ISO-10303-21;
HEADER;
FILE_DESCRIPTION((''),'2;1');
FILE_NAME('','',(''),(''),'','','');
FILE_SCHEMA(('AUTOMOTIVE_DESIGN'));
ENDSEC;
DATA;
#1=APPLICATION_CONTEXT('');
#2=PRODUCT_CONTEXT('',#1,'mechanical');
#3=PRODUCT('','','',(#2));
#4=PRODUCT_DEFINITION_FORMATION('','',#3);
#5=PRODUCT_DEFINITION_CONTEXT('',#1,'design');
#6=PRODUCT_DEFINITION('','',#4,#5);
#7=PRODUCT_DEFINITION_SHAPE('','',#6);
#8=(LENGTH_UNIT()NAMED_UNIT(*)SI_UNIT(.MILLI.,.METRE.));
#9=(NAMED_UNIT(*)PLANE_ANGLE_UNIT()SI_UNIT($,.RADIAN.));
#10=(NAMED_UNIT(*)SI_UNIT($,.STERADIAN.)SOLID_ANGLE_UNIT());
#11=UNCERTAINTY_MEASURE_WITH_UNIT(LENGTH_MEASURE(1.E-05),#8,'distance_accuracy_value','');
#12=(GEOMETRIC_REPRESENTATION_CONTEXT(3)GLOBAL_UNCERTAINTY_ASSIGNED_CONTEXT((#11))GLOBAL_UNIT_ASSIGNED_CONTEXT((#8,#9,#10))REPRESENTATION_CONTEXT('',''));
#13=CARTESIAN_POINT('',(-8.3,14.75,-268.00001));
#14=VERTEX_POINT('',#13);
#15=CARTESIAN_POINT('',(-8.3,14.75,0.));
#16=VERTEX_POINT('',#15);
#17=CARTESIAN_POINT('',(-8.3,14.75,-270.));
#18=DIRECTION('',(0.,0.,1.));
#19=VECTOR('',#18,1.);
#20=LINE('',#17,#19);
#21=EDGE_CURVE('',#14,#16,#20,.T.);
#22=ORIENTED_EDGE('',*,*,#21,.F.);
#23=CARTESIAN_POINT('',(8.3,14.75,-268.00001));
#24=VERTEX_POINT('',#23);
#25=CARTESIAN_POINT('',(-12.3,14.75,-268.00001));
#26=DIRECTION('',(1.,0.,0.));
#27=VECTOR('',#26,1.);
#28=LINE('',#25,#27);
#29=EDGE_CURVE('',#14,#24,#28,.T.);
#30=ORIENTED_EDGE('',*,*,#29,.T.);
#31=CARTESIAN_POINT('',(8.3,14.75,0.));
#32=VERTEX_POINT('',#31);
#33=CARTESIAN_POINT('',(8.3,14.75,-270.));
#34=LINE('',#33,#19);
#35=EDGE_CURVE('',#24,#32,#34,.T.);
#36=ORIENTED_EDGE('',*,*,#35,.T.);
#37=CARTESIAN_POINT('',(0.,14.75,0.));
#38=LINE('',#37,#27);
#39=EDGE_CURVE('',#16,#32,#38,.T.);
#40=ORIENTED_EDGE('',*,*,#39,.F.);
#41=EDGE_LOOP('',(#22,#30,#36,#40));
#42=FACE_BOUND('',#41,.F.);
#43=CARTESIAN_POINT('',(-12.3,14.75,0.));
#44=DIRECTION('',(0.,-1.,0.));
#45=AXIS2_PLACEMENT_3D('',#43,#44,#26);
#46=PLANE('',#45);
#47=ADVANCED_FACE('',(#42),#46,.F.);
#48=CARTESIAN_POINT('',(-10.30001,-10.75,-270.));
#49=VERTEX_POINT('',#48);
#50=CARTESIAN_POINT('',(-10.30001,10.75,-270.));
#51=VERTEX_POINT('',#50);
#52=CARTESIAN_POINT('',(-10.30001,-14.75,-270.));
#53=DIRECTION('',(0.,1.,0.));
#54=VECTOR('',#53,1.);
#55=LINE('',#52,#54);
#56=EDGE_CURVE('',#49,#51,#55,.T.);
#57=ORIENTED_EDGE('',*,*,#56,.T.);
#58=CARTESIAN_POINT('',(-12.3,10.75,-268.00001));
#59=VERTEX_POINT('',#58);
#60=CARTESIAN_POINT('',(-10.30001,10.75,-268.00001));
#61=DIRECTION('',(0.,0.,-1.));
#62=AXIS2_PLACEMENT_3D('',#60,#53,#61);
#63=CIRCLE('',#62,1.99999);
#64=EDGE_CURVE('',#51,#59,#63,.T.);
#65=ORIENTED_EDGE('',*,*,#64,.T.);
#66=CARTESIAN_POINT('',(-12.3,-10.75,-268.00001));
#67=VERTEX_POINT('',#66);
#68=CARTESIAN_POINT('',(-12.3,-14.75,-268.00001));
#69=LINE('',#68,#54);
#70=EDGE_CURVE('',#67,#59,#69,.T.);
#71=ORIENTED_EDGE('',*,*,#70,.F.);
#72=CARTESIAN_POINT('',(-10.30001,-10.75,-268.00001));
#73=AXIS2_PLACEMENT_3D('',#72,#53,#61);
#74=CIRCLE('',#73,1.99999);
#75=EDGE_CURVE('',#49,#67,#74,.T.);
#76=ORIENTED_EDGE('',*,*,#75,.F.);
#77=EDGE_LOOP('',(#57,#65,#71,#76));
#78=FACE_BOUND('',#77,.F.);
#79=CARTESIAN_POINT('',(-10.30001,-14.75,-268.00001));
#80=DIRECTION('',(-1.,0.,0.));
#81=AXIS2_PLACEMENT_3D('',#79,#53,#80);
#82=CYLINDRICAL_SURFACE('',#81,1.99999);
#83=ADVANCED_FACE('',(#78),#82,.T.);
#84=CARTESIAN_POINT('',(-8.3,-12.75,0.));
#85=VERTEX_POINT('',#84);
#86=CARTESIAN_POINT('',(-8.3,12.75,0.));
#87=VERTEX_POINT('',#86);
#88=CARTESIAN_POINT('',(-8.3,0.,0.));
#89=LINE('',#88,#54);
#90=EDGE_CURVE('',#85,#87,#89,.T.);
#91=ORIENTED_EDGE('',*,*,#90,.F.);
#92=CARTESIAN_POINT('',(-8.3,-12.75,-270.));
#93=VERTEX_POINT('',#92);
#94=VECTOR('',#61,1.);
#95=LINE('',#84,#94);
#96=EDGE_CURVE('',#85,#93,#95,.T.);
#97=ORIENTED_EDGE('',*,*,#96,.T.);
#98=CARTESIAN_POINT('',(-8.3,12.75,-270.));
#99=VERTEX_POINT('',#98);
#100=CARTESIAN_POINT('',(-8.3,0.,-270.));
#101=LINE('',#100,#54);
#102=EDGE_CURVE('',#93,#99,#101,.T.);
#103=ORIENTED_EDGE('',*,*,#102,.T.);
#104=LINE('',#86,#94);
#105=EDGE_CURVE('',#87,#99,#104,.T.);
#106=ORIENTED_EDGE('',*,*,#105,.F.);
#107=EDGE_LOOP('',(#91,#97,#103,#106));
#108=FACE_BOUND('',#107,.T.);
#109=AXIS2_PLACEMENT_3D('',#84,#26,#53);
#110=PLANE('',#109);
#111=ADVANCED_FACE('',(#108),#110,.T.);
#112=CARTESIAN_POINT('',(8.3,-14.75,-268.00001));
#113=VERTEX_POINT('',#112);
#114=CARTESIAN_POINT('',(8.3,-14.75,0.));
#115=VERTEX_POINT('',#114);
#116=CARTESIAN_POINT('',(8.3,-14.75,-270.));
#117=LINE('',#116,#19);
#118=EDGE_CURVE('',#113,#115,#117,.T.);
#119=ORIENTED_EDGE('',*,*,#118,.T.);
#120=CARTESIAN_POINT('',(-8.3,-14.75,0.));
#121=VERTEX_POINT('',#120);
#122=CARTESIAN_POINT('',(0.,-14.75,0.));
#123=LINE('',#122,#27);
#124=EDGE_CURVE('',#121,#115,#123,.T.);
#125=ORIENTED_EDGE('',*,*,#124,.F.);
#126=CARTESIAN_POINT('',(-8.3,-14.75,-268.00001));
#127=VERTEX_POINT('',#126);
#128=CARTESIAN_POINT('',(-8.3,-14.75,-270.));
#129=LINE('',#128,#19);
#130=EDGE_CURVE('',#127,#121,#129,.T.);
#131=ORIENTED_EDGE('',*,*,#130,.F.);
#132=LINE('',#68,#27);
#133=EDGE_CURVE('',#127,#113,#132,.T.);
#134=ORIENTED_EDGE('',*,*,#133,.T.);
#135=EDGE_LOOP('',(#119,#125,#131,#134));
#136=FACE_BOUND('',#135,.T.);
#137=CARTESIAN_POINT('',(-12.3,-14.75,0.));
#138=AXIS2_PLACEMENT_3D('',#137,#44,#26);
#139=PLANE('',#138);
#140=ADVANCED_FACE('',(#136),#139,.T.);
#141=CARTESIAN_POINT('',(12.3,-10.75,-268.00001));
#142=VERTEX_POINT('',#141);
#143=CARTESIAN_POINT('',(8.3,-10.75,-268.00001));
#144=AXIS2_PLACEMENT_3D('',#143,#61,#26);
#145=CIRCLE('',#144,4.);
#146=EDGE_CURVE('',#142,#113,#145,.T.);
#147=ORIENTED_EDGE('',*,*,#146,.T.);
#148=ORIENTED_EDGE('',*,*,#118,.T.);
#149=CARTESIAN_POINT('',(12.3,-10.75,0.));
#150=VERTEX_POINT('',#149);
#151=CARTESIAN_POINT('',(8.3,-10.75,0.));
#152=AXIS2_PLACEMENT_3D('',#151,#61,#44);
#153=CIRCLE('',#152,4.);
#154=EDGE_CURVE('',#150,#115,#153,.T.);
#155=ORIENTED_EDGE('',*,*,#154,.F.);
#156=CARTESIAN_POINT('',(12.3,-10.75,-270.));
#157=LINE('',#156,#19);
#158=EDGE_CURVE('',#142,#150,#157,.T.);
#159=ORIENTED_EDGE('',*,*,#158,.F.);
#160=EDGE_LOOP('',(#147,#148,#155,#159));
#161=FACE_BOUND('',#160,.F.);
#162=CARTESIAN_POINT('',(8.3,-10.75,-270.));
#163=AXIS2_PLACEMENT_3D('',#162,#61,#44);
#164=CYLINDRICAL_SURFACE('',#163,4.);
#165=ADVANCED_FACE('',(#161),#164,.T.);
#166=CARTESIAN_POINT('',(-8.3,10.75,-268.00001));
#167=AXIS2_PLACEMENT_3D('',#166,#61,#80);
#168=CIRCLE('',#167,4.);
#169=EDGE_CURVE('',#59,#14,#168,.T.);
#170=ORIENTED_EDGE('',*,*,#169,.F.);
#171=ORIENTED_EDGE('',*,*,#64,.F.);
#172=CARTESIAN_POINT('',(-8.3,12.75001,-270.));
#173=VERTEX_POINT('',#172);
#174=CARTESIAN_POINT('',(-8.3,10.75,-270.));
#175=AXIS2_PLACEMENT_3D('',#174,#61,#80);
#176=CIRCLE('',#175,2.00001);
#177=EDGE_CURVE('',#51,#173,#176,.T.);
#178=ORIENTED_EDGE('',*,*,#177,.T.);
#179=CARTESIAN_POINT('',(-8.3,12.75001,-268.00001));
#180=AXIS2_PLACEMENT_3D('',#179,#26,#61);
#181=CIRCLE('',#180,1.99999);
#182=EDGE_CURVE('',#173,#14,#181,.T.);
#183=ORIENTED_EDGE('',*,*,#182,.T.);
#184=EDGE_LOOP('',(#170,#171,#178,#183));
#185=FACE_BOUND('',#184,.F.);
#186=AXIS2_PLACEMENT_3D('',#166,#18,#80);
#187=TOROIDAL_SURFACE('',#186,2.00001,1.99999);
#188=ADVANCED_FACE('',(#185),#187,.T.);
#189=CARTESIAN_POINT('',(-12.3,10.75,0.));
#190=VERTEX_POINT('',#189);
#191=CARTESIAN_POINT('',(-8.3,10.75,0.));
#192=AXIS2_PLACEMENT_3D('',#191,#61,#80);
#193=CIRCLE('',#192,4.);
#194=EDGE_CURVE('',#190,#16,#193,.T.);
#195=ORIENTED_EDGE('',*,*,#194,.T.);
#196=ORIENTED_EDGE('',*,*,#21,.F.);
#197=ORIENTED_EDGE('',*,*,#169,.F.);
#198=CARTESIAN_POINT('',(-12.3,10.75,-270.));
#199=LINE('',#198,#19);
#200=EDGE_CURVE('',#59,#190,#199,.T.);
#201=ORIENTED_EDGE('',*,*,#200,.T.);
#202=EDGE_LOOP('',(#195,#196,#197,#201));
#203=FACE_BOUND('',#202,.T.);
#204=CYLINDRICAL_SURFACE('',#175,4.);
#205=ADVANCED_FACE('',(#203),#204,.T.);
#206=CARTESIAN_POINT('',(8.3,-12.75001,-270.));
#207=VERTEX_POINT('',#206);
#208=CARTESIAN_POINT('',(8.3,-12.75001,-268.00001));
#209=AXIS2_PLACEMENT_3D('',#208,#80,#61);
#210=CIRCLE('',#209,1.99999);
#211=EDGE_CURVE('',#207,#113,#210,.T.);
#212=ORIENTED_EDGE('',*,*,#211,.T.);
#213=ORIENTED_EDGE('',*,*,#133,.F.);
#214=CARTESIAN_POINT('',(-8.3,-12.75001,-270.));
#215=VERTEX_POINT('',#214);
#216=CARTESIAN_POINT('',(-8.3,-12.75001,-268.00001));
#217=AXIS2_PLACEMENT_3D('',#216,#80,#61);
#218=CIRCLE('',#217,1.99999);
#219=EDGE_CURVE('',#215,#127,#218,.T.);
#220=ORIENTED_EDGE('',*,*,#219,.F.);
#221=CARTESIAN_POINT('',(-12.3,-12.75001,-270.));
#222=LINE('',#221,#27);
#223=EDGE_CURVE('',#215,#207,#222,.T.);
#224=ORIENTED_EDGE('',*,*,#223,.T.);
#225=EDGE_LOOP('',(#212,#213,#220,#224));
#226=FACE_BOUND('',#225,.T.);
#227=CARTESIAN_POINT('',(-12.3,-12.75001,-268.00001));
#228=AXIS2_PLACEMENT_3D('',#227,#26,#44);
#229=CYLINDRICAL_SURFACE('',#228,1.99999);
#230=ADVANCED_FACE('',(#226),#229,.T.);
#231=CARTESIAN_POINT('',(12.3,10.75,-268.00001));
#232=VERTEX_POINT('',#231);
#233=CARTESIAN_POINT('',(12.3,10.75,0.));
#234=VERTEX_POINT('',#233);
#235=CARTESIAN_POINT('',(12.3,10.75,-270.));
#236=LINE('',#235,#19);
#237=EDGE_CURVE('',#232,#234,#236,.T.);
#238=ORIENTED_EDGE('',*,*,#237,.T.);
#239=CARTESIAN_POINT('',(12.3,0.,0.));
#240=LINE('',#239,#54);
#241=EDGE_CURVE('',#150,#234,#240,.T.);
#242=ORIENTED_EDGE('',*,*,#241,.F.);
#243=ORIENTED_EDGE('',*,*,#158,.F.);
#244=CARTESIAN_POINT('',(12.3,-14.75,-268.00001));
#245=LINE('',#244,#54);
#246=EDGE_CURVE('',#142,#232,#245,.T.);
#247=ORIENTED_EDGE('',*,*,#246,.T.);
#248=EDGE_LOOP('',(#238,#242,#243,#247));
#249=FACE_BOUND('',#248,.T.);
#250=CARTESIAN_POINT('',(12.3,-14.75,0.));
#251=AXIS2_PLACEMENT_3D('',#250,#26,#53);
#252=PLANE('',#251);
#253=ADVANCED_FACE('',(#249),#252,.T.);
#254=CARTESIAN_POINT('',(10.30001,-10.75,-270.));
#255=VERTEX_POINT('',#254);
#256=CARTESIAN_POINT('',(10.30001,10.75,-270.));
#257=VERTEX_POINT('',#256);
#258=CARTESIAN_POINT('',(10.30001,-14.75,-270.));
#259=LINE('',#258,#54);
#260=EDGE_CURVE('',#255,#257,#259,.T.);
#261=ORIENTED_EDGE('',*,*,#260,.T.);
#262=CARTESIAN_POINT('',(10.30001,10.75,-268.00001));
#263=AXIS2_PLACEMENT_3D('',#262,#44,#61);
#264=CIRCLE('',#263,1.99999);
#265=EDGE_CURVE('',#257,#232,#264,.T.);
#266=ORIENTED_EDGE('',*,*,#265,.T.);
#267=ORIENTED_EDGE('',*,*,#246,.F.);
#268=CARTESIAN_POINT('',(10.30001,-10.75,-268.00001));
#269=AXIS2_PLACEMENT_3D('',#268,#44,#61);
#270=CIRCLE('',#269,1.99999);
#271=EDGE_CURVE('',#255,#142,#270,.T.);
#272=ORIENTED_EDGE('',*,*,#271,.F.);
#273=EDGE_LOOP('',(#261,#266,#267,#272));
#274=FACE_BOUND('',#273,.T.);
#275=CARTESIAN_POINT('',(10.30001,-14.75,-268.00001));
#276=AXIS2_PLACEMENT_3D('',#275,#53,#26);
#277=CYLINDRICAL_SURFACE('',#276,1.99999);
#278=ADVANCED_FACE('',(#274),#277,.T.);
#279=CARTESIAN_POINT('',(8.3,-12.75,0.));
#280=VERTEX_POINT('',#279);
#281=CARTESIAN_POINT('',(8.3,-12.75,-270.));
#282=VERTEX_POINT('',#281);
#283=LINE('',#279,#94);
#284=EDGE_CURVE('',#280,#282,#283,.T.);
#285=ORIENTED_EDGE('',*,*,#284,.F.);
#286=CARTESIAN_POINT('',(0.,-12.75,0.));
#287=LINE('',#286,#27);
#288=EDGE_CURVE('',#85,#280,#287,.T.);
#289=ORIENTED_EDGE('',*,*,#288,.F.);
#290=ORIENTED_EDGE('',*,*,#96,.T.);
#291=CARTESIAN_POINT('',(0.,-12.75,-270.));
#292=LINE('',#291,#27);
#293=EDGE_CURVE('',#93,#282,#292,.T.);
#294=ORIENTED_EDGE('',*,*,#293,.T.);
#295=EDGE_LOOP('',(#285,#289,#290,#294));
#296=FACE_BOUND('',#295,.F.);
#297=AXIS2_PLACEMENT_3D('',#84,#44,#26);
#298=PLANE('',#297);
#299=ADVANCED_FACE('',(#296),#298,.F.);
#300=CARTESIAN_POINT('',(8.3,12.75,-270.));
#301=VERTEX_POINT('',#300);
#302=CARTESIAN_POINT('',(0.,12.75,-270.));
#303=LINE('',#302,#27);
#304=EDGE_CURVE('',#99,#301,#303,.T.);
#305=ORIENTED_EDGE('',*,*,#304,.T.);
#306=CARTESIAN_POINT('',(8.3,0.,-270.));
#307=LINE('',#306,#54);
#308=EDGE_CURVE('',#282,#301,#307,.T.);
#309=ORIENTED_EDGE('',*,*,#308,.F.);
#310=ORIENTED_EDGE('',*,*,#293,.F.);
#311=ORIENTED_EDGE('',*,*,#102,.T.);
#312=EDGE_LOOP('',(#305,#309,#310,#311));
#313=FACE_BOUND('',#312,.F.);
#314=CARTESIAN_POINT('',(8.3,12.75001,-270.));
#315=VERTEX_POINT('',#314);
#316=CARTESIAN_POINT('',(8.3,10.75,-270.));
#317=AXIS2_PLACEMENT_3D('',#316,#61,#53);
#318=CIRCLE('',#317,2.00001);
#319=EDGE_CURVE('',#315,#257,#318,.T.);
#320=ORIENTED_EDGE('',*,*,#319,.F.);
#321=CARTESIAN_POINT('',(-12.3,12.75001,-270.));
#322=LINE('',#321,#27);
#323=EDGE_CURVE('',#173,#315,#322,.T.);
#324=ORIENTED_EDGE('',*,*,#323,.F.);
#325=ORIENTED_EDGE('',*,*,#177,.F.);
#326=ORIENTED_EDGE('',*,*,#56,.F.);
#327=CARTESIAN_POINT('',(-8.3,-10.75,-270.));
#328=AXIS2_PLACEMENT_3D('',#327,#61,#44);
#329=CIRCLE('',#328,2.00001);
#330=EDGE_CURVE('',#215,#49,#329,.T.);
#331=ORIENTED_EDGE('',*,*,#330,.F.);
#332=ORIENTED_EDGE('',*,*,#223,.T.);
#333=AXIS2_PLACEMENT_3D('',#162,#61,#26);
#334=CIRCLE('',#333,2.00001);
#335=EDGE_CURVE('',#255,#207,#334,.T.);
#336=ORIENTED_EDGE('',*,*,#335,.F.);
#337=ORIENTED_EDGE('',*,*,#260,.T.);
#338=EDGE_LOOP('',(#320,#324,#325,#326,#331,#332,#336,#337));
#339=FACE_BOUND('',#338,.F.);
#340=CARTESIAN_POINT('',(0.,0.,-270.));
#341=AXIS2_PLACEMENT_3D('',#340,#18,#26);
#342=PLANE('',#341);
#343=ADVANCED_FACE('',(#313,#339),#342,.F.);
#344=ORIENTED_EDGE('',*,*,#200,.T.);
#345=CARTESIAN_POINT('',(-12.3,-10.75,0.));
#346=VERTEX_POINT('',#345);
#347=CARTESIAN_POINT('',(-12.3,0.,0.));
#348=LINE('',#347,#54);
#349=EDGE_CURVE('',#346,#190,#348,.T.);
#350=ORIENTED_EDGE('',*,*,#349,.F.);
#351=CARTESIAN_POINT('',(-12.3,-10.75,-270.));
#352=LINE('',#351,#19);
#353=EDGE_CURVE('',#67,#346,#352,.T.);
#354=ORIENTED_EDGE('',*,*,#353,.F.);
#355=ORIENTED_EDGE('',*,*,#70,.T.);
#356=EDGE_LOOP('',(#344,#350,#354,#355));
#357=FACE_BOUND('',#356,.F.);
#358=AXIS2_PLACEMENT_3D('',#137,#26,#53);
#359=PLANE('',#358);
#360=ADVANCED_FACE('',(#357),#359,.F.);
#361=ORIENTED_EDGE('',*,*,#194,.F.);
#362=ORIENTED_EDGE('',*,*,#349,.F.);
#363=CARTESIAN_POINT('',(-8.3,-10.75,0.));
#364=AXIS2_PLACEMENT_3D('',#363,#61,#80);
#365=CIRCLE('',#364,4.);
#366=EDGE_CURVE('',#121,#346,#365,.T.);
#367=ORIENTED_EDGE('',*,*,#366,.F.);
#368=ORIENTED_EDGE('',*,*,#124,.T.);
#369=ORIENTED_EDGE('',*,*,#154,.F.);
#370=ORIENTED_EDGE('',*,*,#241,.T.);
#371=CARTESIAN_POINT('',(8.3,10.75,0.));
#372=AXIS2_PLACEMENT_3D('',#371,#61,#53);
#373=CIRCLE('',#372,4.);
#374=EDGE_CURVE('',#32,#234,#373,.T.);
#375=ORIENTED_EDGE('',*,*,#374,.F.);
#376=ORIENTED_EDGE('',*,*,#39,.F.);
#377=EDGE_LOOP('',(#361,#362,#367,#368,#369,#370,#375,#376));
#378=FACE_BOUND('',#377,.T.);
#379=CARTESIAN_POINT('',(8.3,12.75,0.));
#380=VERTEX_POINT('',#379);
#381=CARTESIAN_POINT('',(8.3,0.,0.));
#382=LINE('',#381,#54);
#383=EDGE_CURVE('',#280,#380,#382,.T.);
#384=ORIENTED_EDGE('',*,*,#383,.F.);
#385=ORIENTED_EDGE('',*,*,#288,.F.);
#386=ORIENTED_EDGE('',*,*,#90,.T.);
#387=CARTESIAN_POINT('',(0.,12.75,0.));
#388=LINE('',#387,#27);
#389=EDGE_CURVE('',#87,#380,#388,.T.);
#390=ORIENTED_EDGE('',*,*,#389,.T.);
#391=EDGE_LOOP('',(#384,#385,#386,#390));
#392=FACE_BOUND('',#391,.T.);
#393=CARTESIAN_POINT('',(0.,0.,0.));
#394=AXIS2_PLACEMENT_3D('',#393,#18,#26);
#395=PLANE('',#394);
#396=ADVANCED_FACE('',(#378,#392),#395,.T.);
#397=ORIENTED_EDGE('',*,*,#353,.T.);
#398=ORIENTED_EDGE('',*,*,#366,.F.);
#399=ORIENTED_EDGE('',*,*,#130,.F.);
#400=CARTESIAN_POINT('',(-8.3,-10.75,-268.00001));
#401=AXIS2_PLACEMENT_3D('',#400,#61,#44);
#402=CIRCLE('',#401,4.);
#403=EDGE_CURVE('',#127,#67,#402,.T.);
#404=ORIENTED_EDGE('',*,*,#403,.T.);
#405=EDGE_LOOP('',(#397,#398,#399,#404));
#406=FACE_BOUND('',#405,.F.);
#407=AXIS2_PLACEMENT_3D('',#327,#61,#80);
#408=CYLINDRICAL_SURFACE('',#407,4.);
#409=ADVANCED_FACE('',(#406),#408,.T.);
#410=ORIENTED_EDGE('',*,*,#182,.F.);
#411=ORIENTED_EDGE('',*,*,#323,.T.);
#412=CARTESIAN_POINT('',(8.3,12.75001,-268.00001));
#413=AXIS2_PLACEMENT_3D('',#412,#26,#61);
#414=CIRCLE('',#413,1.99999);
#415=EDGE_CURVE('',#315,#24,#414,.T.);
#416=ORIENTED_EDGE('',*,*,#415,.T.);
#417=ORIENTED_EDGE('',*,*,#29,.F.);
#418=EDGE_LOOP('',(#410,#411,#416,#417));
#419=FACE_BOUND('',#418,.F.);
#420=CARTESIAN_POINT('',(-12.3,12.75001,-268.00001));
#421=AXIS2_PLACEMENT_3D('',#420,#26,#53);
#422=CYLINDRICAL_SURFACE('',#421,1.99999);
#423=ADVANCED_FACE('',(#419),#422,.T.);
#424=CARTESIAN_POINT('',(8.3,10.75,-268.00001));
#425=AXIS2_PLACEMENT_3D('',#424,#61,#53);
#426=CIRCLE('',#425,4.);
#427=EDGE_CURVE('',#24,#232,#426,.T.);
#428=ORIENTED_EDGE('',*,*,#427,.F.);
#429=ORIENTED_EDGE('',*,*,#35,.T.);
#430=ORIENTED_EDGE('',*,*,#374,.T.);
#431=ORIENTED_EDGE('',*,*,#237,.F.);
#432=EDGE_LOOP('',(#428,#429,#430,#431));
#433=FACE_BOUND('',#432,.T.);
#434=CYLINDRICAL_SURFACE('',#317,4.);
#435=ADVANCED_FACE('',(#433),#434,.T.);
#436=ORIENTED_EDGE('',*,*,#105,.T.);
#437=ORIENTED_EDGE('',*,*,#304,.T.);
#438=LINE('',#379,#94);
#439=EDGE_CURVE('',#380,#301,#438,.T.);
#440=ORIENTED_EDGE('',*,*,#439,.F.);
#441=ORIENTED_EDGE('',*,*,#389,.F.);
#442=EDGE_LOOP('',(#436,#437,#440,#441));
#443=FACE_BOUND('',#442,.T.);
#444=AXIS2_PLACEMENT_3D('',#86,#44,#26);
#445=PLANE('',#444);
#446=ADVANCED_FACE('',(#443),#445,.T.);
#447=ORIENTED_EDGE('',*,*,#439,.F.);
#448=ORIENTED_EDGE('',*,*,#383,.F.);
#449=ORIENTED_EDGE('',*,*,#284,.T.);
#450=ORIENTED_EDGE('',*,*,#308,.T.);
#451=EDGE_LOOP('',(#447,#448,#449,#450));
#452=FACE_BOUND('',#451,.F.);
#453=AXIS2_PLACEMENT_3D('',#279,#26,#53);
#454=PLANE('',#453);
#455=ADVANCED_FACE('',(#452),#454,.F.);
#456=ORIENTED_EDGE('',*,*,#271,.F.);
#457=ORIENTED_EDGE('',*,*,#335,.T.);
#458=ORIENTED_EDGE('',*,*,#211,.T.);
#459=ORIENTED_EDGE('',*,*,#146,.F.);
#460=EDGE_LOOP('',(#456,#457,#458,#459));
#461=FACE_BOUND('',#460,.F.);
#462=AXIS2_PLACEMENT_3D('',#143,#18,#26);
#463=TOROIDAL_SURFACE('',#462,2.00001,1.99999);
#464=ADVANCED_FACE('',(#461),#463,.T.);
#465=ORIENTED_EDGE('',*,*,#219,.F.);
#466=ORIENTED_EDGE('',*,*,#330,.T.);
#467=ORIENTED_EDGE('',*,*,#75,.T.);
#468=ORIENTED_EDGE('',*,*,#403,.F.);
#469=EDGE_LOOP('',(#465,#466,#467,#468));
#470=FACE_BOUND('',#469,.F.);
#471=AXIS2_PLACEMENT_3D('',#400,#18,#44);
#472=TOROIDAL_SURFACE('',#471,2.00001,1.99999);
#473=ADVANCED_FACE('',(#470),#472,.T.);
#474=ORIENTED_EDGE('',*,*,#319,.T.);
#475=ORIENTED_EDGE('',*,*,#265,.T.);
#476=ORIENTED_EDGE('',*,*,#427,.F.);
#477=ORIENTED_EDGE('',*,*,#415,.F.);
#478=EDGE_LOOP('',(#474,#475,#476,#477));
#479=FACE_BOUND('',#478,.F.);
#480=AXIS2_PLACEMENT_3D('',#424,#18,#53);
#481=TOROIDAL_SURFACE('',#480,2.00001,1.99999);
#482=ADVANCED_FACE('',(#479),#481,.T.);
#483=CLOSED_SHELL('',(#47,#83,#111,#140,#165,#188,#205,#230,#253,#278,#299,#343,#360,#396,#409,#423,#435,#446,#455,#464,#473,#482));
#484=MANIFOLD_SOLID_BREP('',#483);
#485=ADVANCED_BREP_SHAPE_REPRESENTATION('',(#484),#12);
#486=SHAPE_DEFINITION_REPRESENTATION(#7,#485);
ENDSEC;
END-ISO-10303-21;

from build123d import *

# Parameters (mm, degrees)
F0_W         = 24.6
F0_H         = 29.5
F0_W_2       = 16.6
F0_H_2       = 25.5
F1_DEPTH     = 270
F2_R         = 1.99999
F3_T1_DEPTH  = 280
F3_T4_ANGLE  = 90
F3_T6_ANGLE  = 90
F3_T8_ANGLE  = 90
F3_T10_ANGLE = 90


# Not quite as in the source:
# - a fillet or chamfer that OpenCascade refuses, or shapes differently, is made with other operations: its cross-section is extruded or revolved along the edge and cut away or added
# - a fillet or chamfer is up to 0.001 mm smaller than in the source, because OpenCascade refuses the exact size


with BuildPart() as f1:
    # F0 (on Top) → F1 (new body)
    with BuildSketch(Plane.XY):
        Rectangle(F0_W, F0_H)
        Rectangle(F0_W_2, F0_H_2, mode=Mode.SUBTRACT)
    extrude(amount=-F1_DEPTH)

    # F2 (radius 2 in the source; OpenCascade refuses exactly that, so slightly less here)
    f2_edges = [f1.edges().sort_by_distance(p)[0] for p in [
        (-12.3, 0, -270),
        (0, 14.75, -270),
        (12.3, 0, -270),
        (0, -14.75, -270),
    ]]
    fillet(f2_edges, radius=F2_R)

    # F3: fillet of radius 4 on 4 edges, made by hand

    # F3_s2 → F3_t1 (cut)
    with BuildSketch(Plane.XY.offset(-270)):
        with BuildLine():
            ThreePointArc((8.3, 14.75), (11.1284271247, 13.5784271247), (12.3, 10.75))
            Line((12.3, 10.75), (12.3, 14.75))
            Line((12.3, 14.75), (8.3, 14.75))
        make_face()
        with BuildLine():
            ThreePointArc((-12.3, 10.75), (-11.1284271247, 13.5784271247), (-8.3, 14.75))
            Line((-8.3, 14.75), (-12.3, 14.75))
            Line((-12.3, 14.75), (-12.3, 10.75))
        make_face()
        with BuildLine():
            ThreePointArc((8.3, -14.75), (11.1284271247, -13.5784271247), (12.3, -10.75))
            Line((12.3, -10.75), (12.3, -14.75))
            Line((12.3, -14.75), (8.3, -14.75))
        make_face()
        with BuildLine():
            ThreePointArc((-12.3, -10.75), (-11.1284271247, -13.5784271247), (-8.3, -14.75))
            Line((-8.3, -14.75), (-12.3, -14.75))
            Line((-12.3, -14.75), (-12.3, -10.75))
        make_face()
    extrude(amount=F3_T1_DEPTH, mode=Mode.SUBTRACT)

    # F3_s3 → F3_t4 (revolve, cut)
    with BuildSketch(Plane.YZ.offset(-8.3)):
        with BuildLine():
            ThreePointArc((-12.75001, -270), (-14.1642164913, -269.4142164913), (-14.75, -268.00001))
            Line((-14.75, -268.00001), (-14.75, -270))
            Line((-14.75, -270), (-12.75001, -270))
        make_face()
    revolve(axis=Axis((-8.3, -10.75, -270), (0, 0, -1)), revolution_arc=F3_T4_ANGLE, mode=Mode.SUBTRACT)

    # F3_s5 → F3_t6 (revolve, cut)
    with BuildSketch(Plane.XZ.offset(10.75)):
        with BuildLine():
            ThreePointArc((10.30001, -270), (11.7142164913, -269.4142164913), (12.3, -268.00001))
            Line((12.3, -268.00001), (12.3, -270))
            Line((12.3, -270), (10.30001, -270))
        make_face()
    revolve(axis=Axis((8.3, -10.75, -270), (0, 0, -1)), revolution_arc=F3_T6_ANGLE, mode=Mode.SUBTRACT)

    # F3_s7 → F3_t8 (revolve, cut)
    with BuildSketch(Plane.XZ.offset(-10.75)):
        with BuildLine():
            ThreePointArc((-10.30001, -270), (-11.7142164913, -269.4142164913), (-12.3, -268.00001))
            Line((-12.3, -268.00001), (-12.3, -270))
            Line((-12.3, -270), (-10.30001, -270))
        make_face()
    revolve(axis=Axis((-8.3, 10.75, -270), (0, 0, -1)), revolution_arc=F3_T8_ANGLE, mode=Mode.SUBTRACT)

    # F3_s9 → F3_t10 (revolve, cut)
    with BuildSketch(Plane.YZ.offset(8.3)):
        with BuildLine():
            ThreePointArc((12.75001, -270), (14.1642164913, -269.4142164913), (14.75, -268.00001))
            Line((14.75, -268.00001), (14.75, -270))
            Line((14.75, -270), (12.75001, -270))
        make_face()
    revolve(axis=Axis((8.3, 10.75, -270), (0, 0, -1)), revolution_arc=F3_T10_ANGLE, mode=Mode.SUBTRACT)


solid = f1.part
